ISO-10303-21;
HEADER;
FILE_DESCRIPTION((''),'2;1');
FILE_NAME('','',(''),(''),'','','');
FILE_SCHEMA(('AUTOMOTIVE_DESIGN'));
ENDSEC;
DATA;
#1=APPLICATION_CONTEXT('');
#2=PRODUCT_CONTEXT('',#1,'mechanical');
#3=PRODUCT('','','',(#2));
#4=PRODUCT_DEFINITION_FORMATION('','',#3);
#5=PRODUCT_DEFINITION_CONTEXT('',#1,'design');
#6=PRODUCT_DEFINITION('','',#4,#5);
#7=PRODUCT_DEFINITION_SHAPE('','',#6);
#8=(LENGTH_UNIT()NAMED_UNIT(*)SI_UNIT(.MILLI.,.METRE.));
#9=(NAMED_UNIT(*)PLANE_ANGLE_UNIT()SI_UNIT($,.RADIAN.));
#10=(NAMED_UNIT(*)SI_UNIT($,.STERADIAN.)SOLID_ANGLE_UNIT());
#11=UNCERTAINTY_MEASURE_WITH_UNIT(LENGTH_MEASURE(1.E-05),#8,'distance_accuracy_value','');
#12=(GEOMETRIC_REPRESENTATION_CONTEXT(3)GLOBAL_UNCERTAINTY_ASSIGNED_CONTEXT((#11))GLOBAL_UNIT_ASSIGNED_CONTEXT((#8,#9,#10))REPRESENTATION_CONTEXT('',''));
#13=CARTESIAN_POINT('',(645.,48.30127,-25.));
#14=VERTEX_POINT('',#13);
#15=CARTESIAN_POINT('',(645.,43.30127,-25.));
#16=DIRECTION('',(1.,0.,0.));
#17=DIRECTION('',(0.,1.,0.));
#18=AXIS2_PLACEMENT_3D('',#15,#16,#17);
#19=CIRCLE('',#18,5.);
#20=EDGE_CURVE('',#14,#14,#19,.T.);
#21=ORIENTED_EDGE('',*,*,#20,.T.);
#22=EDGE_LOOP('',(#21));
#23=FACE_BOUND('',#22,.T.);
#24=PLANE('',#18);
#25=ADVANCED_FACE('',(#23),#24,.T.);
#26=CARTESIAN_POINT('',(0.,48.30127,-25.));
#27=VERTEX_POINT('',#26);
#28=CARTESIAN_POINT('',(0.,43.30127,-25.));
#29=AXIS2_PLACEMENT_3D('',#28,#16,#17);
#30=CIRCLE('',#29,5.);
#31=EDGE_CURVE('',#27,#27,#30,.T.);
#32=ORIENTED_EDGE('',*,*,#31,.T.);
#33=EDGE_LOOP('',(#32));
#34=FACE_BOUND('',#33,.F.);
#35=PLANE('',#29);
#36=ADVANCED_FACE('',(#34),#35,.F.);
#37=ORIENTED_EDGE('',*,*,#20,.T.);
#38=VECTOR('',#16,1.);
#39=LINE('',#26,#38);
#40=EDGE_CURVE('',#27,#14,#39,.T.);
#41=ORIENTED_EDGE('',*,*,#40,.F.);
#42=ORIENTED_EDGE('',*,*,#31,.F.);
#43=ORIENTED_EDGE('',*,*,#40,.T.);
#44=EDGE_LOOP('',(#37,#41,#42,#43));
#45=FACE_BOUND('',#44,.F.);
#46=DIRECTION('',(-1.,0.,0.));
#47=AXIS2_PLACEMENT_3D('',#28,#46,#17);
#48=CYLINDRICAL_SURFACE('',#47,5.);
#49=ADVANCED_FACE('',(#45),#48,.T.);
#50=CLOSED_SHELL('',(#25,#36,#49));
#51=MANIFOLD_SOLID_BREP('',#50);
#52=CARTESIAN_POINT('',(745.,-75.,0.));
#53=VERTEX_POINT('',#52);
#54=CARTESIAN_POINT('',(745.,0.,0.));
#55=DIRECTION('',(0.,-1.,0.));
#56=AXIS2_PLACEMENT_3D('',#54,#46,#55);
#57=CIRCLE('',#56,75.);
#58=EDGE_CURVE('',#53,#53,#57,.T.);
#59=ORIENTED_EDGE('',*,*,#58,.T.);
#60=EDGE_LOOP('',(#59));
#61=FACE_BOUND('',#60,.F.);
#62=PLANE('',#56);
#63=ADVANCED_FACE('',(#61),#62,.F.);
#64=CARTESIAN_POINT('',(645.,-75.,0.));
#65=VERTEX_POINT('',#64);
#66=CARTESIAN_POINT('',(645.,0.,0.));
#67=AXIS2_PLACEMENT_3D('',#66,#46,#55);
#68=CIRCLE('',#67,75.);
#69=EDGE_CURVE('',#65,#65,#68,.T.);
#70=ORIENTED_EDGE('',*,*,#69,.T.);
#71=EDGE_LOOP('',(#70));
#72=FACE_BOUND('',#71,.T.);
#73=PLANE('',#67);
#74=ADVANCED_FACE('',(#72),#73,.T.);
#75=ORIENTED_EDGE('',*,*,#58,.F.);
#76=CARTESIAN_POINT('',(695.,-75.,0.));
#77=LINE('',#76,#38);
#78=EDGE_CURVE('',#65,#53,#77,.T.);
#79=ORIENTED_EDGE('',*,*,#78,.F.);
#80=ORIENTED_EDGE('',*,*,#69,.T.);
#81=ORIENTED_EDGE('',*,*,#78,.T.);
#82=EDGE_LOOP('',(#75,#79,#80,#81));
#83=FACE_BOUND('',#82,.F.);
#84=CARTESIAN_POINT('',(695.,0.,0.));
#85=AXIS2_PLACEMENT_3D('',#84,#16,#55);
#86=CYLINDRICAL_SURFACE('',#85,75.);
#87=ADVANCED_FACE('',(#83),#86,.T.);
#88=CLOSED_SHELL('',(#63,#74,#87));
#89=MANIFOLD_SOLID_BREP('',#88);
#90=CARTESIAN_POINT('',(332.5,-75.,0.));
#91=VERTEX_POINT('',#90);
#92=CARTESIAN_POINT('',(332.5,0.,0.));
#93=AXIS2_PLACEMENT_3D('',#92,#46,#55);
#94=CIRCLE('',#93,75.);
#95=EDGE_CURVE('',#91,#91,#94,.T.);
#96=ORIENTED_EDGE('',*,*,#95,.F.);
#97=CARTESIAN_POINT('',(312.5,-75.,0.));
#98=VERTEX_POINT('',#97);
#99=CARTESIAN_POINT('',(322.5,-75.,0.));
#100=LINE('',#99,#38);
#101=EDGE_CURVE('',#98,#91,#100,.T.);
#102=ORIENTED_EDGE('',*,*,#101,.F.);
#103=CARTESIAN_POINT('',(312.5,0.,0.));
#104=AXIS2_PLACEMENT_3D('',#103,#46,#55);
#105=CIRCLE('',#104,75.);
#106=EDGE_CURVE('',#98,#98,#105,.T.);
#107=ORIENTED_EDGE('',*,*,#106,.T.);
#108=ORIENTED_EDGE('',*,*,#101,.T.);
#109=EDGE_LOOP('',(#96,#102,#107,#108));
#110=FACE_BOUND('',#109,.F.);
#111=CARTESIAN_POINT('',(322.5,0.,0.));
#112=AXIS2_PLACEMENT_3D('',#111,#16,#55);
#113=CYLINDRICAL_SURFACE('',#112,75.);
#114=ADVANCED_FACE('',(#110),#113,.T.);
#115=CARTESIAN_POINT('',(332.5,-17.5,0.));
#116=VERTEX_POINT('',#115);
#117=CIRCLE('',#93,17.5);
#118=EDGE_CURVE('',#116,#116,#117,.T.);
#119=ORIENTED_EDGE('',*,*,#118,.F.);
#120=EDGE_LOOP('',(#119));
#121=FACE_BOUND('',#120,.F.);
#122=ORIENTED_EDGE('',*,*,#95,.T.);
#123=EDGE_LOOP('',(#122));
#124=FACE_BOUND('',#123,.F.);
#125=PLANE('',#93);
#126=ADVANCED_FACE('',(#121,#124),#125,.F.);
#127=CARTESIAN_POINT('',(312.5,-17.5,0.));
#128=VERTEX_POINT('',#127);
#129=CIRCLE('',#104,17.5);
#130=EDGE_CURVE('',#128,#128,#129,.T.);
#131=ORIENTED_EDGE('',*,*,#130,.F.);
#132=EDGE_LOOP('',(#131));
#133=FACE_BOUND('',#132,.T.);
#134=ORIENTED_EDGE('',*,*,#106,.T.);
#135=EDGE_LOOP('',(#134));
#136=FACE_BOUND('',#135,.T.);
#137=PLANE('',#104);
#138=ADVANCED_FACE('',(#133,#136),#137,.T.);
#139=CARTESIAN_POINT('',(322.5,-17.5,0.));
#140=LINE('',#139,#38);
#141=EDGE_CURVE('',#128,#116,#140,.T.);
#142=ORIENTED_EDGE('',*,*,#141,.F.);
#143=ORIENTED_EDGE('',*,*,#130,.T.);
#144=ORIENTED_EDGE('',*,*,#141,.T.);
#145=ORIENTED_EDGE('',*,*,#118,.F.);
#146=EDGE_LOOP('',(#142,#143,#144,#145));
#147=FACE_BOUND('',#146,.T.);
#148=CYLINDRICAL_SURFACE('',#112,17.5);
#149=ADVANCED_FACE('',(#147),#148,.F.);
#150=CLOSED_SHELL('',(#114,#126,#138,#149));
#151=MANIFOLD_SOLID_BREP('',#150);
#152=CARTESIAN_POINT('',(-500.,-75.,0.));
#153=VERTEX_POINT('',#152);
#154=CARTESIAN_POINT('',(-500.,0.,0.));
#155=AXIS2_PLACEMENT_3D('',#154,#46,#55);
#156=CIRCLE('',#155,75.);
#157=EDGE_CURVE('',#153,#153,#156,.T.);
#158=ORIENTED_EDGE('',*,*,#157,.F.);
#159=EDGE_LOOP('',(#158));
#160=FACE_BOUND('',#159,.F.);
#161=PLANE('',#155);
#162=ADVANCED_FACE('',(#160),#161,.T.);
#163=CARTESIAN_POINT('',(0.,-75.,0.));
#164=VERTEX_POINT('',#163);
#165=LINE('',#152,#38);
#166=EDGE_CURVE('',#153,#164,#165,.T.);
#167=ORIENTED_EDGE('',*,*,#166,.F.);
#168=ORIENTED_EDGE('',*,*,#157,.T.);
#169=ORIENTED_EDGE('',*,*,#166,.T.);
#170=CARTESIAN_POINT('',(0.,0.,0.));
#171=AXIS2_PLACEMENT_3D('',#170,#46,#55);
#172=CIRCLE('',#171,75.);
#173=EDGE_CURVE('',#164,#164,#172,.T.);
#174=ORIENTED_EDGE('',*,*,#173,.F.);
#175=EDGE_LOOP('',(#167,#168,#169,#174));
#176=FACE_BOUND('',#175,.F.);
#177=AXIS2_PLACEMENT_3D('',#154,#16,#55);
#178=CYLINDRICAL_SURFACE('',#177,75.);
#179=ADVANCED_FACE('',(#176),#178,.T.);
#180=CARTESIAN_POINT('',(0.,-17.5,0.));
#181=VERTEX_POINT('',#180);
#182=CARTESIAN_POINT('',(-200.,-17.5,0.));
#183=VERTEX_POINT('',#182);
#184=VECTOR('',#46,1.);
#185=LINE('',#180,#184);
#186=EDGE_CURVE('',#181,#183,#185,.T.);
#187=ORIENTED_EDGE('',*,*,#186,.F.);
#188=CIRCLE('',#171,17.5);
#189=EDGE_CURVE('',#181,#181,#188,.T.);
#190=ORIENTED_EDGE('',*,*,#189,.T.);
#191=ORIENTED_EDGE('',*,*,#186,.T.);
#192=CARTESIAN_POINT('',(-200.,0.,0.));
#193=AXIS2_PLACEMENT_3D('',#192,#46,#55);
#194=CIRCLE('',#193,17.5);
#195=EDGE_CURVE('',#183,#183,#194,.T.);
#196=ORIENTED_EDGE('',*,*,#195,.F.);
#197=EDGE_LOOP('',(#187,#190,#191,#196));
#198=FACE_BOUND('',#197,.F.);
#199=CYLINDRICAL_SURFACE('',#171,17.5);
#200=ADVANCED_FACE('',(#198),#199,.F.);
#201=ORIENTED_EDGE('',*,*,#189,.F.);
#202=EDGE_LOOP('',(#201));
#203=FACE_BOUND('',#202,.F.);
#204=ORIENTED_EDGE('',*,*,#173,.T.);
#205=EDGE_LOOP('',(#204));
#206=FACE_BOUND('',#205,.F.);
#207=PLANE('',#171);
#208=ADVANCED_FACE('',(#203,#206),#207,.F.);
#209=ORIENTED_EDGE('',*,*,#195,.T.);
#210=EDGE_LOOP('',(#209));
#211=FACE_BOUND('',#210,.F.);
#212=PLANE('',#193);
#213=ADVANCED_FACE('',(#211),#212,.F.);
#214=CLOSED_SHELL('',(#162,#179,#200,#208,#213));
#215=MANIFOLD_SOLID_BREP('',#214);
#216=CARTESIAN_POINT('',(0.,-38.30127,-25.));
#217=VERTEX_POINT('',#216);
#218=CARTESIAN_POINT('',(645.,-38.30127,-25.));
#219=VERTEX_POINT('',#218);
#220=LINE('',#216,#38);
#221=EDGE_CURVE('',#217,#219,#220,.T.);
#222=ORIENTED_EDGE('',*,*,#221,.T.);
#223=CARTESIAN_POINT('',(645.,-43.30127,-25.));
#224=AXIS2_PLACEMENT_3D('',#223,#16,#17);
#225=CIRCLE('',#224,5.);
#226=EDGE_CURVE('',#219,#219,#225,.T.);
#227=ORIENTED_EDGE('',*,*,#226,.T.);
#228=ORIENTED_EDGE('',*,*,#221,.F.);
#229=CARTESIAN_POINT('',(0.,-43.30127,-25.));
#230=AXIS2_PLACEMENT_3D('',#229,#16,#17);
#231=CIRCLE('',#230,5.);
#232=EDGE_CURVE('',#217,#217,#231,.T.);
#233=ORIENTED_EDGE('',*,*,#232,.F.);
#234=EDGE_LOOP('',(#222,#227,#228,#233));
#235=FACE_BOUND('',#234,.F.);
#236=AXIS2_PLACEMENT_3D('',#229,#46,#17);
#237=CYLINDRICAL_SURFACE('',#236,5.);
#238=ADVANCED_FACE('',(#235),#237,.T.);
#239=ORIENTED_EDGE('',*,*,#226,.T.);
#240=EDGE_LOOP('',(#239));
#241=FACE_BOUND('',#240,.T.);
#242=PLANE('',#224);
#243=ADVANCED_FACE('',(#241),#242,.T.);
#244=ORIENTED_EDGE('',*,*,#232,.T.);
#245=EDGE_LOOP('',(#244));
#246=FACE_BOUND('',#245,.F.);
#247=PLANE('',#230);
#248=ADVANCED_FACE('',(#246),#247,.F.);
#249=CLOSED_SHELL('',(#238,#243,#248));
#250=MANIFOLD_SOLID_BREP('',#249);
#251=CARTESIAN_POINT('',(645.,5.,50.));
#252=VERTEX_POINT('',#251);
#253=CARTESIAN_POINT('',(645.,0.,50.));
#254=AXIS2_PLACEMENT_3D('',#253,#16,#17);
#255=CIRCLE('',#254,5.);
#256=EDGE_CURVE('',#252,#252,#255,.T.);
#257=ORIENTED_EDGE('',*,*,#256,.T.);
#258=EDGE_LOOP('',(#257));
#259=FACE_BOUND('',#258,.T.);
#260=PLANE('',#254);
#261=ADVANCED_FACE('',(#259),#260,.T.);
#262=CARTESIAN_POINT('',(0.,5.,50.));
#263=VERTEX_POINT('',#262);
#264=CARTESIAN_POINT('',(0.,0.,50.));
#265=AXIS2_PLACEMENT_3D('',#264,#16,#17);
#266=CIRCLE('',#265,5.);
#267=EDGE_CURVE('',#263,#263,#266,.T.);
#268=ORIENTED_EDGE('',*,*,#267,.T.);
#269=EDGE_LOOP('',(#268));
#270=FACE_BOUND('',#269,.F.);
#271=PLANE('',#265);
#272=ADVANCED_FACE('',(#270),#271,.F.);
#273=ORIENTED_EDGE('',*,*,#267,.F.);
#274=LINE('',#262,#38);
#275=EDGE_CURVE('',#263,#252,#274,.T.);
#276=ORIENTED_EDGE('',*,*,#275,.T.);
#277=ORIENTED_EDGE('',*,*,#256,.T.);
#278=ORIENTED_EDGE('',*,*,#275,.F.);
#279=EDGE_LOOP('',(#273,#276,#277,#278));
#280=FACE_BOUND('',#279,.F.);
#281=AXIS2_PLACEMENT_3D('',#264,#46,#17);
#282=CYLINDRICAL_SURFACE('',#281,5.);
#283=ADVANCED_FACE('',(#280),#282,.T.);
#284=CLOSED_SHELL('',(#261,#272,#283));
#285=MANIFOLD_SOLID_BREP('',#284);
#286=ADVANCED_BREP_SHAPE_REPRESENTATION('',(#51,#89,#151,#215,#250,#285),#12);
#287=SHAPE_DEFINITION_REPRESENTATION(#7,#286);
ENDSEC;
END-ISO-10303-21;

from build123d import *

# Parameters (mm, degrees)
F2_W     = 20
F2_H     = 57.5
F1_W     = 100
F1_H     = 75
F4_R     = 5
F5_DEPTH = 645


# Not quite as in the source:
# - a feature names something its author has since deleted; it is built from what else it names


with BuildPart() as f3:
    # F0 (on Top) → F3 (revolve)
    with BuildSketch(Plane.XY):
        Polygon((-200, 0), (-500, 0), (-500, -75), (0, -75), (0, -17.5), (-200, -17.5), align=None)
    revolve(axis=Axis((-350, 0, 0), (-1, 0, 0)))


with BuildPart() as f3b:
    # F2 (on Top) → F3, piece 2 (revolve)
    with BuildSketch(Plane.XY):
        with Locations((322.5, -46.25)):
            Rectangle(F2_W, F2_H)
    revolve(axis=Axis((-350, 0, 0), (-1, 0, 0)))


with BuildPart() as f3c:
    # F1 (on Top) → F3, piece 3 (revolve)
    with BuildSketch(Plane.XY):
        with Locations((695, -37.5)):
            Rectangle(F1_W, F1_H)
    revolve(axis=Axis((-350, 0, 0), (-1, 0, 0)))


with BuildPart() as f5:
    # F4 (on Right) → F5 (new body, through all)
    with BuildSketch(Plane.YZ):
        with Locations((0, 50)):
            Circle(F4_R)
    extrude(amount=F5_DEPTH)


with BuildPart() as f5b:
    # F4 (on Right) → F5, piece 2 (new body, through all)
    with BuildSketch(Plane.YZ):
        with Locations((-43.3012701892, -25)):
            Circle(F4_R)
    extrude(amount=F5_DEPTH)


with BuildPart() as f5c:
    # F4 (on Right) → F5, piece 3 (new body, through all)
    with BuildSketch(Plane.YZ):
        with Locations((43.3012701892, -25)):
            Circle(F4_R)
    extrude(amount=F5_DEPTH)


solid = Compound([f3.part, f3b.part, f3c.part, f5.part, f5b.part, f5c.part])
